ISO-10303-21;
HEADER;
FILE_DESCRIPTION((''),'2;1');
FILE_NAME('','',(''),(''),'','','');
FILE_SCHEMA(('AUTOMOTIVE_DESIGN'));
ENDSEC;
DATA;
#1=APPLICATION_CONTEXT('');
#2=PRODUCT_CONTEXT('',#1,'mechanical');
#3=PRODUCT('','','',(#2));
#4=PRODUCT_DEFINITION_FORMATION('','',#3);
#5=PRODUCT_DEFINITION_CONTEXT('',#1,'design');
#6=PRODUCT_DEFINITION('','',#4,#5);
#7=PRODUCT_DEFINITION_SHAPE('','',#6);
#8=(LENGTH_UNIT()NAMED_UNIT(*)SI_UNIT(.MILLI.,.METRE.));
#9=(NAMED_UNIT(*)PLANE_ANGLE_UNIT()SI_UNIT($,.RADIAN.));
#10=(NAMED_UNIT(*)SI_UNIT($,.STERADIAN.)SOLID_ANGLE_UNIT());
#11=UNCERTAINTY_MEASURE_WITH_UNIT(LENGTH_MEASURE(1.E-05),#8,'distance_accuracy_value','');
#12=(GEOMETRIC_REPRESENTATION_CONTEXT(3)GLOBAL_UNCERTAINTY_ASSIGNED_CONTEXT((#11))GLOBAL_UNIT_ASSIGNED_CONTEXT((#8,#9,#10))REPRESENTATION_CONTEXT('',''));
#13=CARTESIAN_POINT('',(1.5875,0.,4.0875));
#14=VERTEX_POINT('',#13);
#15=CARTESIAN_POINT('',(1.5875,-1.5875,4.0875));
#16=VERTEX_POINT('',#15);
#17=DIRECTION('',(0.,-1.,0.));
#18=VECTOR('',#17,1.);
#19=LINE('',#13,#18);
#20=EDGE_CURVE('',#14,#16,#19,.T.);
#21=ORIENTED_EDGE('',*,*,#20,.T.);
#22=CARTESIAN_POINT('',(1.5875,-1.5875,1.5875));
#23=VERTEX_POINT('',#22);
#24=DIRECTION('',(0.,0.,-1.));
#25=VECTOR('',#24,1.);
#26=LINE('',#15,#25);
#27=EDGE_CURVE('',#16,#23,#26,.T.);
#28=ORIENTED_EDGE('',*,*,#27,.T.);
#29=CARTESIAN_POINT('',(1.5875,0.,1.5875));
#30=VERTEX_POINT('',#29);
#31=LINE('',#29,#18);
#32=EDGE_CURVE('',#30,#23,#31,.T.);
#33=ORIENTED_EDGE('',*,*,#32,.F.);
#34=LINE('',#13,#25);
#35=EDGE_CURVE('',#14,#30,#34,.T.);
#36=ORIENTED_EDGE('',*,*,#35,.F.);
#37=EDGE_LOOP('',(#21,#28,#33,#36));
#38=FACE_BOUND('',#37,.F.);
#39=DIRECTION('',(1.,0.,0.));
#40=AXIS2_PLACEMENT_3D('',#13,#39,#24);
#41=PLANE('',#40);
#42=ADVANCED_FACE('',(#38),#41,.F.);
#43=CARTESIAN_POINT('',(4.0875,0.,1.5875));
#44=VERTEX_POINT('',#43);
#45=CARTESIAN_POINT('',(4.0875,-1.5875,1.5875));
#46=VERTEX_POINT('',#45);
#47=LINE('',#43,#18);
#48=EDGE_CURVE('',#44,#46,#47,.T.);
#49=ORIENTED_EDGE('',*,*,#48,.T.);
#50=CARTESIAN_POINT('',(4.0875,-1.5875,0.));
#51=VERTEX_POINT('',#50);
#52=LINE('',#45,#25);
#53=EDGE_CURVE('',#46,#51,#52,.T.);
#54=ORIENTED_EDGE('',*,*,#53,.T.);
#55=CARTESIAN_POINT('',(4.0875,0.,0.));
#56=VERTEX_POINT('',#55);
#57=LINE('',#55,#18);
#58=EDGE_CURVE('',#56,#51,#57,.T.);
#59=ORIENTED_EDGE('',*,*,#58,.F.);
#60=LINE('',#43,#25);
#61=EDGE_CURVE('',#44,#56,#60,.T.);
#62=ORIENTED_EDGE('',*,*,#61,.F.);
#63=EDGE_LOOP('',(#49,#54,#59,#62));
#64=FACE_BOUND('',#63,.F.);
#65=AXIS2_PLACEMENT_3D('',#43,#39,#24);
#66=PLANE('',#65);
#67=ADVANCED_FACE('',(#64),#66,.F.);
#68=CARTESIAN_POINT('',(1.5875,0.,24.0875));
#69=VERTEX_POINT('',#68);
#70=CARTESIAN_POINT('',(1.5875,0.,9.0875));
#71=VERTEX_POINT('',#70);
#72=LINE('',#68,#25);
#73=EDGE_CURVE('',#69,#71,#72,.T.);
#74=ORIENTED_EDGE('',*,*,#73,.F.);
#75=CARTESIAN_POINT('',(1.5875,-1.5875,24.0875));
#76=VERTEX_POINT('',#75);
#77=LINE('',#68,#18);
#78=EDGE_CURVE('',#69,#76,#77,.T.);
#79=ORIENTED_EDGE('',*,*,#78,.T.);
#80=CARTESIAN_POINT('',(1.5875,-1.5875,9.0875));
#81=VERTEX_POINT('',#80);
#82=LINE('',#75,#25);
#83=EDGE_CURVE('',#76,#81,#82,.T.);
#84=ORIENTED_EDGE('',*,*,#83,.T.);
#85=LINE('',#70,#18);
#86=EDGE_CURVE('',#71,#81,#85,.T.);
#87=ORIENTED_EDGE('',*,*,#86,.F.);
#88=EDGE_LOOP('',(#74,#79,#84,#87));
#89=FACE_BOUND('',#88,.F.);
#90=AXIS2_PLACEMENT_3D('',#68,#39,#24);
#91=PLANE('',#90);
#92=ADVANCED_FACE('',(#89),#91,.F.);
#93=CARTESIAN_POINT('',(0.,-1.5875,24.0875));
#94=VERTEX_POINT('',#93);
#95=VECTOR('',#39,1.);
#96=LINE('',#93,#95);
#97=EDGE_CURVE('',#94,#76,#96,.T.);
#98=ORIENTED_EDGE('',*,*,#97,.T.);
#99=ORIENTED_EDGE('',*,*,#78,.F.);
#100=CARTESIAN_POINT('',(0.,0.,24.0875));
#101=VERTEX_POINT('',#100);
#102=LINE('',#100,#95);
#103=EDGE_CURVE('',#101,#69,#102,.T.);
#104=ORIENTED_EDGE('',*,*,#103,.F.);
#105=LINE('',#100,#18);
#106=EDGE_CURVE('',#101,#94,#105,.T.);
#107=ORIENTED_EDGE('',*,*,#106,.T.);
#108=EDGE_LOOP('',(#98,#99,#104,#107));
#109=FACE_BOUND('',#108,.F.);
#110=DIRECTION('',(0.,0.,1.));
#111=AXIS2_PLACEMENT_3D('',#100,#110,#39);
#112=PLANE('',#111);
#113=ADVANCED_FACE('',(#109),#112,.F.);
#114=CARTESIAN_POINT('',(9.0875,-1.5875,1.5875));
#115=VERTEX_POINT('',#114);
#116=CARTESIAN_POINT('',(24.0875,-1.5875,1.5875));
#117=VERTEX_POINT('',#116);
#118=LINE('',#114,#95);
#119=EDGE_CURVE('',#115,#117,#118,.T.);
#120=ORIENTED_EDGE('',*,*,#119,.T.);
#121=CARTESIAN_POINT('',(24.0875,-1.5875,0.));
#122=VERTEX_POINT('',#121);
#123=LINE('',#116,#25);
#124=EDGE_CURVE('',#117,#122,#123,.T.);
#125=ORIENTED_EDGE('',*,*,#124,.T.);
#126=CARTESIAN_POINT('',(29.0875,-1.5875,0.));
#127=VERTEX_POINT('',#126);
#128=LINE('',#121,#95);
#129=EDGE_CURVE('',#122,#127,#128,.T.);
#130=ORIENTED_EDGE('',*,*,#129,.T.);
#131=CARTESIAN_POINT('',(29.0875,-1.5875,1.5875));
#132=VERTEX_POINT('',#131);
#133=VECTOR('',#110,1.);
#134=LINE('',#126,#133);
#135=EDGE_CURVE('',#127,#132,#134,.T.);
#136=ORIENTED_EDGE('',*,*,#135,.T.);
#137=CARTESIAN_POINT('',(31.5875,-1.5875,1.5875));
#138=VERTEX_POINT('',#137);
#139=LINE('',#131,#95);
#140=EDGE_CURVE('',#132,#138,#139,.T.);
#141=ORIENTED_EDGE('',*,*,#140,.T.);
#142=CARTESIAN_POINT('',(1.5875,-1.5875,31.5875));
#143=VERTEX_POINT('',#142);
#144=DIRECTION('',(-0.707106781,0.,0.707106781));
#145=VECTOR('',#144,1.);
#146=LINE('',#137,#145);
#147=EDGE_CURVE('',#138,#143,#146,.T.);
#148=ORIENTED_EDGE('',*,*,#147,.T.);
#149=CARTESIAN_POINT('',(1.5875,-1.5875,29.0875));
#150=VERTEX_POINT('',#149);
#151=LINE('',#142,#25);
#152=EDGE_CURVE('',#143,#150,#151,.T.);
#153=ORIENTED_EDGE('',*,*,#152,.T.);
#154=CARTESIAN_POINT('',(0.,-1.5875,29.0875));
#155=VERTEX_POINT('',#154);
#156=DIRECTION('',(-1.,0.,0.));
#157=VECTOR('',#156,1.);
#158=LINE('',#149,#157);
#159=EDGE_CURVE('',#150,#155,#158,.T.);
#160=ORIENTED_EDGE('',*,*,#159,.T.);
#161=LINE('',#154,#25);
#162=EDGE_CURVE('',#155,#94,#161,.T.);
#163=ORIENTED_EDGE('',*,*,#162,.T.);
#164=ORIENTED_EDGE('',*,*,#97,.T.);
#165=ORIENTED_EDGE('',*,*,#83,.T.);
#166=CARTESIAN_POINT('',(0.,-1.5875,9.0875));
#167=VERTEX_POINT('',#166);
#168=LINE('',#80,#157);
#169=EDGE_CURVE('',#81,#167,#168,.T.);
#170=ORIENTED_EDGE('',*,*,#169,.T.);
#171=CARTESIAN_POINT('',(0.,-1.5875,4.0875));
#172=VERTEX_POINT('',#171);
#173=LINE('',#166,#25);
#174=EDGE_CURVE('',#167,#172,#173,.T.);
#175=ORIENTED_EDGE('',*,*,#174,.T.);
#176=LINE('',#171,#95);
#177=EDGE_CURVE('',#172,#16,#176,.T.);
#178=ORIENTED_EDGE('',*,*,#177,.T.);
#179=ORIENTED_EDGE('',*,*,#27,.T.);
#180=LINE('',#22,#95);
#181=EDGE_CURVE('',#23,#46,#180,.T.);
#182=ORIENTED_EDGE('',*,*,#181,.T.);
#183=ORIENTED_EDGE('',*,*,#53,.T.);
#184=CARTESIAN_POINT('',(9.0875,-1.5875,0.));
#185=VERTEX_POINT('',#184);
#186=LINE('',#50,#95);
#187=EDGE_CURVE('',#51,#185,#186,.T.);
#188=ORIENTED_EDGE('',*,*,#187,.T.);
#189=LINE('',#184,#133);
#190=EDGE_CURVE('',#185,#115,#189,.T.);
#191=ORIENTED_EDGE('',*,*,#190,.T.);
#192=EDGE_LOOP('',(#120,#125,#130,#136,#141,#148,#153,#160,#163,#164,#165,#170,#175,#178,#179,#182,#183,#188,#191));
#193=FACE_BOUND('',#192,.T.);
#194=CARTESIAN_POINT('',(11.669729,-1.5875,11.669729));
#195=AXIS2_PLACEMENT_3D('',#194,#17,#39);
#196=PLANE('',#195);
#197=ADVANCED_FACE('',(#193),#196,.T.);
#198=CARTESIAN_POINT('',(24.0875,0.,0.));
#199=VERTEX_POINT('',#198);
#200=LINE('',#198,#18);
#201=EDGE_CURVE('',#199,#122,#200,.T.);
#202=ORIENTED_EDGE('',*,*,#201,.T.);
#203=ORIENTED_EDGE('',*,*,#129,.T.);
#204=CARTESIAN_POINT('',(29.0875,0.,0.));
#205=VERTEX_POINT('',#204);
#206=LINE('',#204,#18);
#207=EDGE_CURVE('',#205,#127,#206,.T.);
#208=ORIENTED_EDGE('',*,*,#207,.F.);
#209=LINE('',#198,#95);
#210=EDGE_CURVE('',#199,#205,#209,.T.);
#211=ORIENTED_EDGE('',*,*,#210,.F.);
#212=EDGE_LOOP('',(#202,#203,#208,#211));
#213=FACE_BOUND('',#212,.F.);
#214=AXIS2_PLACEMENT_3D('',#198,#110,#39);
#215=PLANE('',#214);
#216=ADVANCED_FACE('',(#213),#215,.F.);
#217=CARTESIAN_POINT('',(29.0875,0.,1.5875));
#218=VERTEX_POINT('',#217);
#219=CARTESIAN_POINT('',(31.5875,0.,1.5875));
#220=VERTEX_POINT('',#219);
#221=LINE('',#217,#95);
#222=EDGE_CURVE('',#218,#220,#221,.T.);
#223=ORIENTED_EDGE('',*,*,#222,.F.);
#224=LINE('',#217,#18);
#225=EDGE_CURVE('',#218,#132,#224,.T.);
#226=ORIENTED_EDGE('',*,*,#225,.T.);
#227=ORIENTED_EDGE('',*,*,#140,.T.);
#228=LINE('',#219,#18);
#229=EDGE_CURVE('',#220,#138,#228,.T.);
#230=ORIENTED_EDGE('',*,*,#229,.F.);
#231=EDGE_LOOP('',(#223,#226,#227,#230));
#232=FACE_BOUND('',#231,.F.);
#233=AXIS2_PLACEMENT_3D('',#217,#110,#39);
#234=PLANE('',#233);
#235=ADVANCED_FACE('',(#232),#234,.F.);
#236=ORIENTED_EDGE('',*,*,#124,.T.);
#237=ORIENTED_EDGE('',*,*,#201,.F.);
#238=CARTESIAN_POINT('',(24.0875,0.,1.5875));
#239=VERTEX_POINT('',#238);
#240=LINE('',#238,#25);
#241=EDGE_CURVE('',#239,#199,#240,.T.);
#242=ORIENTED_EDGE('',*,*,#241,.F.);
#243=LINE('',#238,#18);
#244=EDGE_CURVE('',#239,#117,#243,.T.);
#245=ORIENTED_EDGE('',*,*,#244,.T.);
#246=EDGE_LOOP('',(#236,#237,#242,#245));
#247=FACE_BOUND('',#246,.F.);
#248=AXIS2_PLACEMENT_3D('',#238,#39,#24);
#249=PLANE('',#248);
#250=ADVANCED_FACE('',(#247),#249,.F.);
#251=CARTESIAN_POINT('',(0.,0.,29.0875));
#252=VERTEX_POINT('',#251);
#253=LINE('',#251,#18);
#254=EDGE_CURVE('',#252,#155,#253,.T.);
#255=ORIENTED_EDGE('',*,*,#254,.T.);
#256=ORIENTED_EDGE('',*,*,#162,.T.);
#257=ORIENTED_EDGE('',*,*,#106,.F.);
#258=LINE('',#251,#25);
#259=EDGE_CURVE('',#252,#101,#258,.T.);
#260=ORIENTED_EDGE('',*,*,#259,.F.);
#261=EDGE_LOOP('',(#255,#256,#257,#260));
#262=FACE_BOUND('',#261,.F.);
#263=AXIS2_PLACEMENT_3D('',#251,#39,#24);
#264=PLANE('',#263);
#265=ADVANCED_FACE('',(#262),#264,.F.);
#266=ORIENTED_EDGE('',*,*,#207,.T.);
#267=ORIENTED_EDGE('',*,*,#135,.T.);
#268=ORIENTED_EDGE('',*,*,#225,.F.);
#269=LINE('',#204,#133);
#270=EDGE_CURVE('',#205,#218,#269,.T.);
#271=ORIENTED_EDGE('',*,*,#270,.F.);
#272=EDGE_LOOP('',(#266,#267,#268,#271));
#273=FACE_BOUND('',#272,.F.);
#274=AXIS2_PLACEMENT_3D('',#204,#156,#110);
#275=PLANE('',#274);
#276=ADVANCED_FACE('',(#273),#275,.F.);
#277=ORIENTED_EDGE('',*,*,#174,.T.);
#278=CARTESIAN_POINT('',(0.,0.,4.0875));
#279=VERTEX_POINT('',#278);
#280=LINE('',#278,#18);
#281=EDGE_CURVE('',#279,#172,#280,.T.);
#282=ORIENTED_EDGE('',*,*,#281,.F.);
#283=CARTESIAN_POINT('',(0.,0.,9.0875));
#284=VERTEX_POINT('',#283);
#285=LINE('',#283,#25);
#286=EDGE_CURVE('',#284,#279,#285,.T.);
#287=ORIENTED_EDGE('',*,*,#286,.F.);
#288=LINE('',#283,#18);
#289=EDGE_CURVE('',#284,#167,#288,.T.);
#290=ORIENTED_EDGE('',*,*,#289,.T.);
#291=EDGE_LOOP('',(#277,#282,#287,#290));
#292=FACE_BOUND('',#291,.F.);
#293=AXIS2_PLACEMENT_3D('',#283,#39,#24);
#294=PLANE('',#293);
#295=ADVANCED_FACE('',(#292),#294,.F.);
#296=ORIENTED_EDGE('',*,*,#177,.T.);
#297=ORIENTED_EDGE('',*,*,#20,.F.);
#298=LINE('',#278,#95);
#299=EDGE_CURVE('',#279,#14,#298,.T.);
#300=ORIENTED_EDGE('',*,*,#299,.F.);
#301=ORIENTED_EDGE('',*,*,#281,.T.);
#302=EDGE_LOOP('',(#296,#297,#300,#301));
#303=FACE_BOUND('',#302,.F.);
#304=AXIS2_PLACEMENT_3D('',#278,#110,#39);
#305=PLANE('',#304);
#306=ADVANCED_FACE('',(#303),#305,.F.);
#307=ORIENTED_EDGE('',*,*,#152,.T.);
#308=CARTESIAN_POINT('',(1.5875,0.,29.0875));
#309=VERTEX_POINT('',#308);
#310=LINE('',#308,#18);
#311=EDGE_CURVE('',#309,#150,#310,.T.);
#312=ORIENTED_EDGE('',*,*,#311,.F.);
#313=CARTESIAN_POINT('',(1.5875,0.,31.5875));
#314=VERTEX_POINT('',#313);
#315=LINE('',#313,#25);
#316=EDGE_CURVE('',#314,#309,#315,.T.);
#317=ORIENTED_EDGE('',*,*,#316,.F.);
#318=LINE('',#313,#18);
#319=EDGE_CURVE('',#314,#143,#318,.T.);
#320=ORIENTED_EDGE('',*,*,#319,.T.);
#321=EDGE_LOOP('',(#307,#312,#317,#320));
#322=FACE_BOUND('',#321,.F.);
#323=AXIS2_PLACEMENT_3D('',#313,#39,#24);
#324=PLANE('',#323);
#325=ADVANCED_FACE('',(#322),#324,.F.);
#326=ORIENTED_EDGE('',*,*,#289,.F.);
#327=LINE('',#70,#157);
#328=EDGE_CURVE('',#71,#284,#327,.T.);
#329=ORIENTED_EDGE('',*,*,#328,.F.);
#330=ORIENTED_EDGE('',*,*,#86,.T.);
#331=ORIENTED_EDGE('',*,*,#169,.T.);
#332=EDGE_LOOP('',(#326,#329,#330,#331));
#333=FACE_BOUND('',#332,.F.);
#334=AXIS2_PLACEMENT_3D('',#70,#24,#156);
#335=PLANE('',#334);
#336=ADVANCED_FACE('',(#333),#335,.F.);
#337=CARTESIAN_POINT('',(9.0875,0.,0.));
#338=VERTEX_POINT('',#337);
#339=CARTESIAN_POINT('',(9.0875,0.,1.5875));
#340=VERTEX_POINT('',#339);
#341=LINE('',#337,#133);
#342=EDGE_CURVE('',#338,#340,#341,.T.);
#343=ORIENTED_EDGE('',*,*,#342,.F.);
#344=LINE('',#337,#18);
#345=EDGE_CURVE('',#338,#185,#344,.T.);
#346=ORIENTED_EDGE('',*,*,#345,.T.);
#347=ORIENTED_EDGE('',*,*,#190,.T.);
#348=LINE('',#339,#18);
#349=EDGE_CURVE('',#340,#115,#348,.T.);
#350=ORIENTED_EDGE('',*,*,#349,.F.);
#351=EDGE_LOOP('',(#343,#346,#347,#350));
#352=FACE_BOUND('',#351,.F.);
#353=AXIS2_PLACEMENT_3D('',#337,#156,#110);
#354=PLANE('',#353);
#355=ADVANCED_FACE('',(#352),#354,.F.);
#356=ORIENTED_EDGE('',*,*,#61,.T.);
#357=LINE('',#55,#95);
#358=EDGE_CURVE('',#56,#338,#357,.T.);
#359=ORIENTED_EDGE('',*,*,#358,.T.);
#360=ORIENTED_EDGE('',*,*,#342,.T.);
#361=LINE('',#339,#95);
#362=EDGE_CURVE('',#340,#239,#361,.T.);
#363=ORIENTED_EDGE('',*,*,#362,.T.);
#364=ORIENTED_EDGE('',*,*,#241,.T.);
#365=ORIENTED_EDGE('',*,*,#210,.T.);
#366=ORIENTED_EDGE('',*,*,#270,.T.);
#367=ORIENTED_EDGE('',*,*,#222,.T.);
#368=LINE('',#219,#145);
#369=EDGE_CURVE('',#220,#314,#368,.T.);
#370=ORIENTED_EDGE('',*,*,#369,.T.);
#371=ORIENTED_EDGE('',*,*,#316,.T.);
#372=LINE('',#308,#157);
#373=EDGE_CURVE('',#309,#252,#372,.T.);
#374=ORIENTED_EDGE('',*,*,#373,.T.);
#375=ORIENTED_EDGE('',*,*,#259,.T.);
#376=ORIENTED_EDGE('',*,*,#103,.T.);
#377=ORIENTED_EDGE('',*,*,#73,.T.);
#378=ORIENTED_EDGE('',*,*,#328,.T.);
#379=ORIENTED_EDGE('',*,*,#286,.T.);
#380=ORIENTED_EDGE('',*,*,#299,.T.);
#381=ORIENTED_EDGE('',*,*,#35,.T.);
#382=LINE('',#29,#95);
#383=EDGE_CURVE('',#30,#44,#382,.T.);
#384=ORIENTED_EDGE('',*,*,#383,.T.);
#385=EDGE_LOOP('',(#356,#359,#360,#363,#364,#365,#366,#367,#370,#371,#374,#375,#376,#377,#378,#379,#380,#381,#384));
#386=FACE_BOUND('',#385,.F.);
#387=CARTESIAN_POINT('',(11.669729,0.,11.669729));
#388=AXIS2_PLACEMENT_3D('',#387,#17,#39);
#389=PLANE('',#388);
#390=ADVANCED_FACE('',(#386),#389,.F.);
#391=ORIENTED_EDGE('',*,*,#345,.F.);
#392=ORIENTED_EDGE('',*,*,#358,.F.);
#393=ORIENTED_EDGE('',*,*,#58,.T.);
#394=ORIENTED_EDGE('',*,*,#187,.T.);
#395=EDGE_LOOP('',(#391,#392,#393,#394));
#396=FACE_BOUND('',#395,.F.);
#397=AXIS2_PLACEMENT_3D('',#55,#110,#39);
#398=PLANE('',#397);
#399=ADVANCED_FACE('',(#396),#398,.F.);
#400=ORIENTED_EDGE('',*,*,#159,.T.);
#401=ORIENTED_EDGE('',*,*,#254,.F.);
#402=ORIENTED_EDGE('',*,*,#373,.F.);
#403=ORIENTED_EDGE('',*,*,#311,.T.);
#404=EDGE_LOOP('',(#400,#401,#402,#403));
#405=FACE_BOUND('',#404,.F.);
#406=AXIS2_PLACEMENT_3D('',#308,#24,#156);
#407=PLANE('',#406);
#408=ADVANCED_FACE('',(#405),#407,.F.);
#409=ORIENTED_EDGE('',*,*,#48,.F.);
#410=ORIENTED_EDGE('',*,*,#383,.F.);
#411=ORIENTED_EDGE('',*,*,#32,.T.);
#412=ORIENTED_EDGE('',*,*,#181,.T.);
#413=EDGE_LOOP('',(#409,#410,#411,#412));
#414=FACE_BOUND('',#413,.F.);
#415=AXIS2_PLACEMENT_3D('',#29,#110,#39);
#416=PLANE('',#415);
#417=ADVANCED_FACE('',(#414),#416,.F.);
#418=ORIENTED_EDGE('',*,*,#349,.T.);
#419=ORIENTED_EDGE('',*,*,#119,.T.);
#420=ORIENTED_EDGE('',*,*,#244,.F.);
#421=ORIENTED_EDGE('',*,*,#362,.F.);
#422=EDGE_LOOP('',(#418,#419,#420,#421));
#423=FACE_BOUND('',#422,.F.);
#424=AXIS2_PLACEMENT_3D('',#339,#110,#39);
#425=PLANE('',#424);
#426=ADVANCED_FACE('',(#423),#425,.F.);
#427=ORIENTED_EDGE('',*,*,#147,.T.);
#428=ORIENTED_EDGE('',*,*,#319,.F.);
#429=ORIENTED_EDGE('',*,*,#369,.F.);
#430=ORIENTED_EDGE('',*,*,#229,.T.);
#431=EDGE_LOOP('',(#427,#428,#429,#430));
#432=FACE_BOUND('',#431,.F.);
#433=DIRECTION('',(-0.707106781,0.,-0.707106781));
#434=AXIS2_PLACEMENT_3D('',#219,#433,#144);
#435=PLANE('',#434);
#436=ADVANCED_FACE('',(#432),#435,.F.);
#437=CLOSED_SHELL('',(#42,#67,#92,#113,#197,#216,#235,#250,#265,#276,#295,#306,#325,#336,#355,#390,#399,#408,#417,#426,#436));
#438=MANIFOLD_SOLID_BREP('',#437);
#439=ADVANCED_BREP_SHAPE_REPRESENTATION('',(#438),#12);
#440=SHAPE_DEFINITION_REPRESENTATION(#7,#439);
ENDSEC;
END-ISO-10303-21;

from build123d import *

# Parameters (mm, degrees)
F1_DEPTH = 1.5875


# Not quite as in the source:
# - a length typed as a fraction of an inch, garbled in the dataset ("3 / 203.2 mm" for 3/8 in), is restored


with BuildPart() as f1:
    # F0 (on Front) → F1 (new body)
    with BuildSketch(Plane.XZ):
        Polygon((0, 9.0875), (0, 4.0875), (1.5875, 4.0875), (1.5875, 1.5875), (4.0875, 1.5875), (4.0875, 0), (9.0875, 0), (9.0875, 1.5875), (24.0875, 1.5875), (24.0875, 0), (29.0875, 0), (29.0875, 1.5875), (31.5875, 1.5875), (1.5875, 31.5875), (1.5875, 29.0875), (0, 29.0875), (0, 24.0875), (1.5875, 24.0875), (1.5875, 9.0875), align=None)
    extrude(amount=F1_DEPTH)


solid = f1.part
